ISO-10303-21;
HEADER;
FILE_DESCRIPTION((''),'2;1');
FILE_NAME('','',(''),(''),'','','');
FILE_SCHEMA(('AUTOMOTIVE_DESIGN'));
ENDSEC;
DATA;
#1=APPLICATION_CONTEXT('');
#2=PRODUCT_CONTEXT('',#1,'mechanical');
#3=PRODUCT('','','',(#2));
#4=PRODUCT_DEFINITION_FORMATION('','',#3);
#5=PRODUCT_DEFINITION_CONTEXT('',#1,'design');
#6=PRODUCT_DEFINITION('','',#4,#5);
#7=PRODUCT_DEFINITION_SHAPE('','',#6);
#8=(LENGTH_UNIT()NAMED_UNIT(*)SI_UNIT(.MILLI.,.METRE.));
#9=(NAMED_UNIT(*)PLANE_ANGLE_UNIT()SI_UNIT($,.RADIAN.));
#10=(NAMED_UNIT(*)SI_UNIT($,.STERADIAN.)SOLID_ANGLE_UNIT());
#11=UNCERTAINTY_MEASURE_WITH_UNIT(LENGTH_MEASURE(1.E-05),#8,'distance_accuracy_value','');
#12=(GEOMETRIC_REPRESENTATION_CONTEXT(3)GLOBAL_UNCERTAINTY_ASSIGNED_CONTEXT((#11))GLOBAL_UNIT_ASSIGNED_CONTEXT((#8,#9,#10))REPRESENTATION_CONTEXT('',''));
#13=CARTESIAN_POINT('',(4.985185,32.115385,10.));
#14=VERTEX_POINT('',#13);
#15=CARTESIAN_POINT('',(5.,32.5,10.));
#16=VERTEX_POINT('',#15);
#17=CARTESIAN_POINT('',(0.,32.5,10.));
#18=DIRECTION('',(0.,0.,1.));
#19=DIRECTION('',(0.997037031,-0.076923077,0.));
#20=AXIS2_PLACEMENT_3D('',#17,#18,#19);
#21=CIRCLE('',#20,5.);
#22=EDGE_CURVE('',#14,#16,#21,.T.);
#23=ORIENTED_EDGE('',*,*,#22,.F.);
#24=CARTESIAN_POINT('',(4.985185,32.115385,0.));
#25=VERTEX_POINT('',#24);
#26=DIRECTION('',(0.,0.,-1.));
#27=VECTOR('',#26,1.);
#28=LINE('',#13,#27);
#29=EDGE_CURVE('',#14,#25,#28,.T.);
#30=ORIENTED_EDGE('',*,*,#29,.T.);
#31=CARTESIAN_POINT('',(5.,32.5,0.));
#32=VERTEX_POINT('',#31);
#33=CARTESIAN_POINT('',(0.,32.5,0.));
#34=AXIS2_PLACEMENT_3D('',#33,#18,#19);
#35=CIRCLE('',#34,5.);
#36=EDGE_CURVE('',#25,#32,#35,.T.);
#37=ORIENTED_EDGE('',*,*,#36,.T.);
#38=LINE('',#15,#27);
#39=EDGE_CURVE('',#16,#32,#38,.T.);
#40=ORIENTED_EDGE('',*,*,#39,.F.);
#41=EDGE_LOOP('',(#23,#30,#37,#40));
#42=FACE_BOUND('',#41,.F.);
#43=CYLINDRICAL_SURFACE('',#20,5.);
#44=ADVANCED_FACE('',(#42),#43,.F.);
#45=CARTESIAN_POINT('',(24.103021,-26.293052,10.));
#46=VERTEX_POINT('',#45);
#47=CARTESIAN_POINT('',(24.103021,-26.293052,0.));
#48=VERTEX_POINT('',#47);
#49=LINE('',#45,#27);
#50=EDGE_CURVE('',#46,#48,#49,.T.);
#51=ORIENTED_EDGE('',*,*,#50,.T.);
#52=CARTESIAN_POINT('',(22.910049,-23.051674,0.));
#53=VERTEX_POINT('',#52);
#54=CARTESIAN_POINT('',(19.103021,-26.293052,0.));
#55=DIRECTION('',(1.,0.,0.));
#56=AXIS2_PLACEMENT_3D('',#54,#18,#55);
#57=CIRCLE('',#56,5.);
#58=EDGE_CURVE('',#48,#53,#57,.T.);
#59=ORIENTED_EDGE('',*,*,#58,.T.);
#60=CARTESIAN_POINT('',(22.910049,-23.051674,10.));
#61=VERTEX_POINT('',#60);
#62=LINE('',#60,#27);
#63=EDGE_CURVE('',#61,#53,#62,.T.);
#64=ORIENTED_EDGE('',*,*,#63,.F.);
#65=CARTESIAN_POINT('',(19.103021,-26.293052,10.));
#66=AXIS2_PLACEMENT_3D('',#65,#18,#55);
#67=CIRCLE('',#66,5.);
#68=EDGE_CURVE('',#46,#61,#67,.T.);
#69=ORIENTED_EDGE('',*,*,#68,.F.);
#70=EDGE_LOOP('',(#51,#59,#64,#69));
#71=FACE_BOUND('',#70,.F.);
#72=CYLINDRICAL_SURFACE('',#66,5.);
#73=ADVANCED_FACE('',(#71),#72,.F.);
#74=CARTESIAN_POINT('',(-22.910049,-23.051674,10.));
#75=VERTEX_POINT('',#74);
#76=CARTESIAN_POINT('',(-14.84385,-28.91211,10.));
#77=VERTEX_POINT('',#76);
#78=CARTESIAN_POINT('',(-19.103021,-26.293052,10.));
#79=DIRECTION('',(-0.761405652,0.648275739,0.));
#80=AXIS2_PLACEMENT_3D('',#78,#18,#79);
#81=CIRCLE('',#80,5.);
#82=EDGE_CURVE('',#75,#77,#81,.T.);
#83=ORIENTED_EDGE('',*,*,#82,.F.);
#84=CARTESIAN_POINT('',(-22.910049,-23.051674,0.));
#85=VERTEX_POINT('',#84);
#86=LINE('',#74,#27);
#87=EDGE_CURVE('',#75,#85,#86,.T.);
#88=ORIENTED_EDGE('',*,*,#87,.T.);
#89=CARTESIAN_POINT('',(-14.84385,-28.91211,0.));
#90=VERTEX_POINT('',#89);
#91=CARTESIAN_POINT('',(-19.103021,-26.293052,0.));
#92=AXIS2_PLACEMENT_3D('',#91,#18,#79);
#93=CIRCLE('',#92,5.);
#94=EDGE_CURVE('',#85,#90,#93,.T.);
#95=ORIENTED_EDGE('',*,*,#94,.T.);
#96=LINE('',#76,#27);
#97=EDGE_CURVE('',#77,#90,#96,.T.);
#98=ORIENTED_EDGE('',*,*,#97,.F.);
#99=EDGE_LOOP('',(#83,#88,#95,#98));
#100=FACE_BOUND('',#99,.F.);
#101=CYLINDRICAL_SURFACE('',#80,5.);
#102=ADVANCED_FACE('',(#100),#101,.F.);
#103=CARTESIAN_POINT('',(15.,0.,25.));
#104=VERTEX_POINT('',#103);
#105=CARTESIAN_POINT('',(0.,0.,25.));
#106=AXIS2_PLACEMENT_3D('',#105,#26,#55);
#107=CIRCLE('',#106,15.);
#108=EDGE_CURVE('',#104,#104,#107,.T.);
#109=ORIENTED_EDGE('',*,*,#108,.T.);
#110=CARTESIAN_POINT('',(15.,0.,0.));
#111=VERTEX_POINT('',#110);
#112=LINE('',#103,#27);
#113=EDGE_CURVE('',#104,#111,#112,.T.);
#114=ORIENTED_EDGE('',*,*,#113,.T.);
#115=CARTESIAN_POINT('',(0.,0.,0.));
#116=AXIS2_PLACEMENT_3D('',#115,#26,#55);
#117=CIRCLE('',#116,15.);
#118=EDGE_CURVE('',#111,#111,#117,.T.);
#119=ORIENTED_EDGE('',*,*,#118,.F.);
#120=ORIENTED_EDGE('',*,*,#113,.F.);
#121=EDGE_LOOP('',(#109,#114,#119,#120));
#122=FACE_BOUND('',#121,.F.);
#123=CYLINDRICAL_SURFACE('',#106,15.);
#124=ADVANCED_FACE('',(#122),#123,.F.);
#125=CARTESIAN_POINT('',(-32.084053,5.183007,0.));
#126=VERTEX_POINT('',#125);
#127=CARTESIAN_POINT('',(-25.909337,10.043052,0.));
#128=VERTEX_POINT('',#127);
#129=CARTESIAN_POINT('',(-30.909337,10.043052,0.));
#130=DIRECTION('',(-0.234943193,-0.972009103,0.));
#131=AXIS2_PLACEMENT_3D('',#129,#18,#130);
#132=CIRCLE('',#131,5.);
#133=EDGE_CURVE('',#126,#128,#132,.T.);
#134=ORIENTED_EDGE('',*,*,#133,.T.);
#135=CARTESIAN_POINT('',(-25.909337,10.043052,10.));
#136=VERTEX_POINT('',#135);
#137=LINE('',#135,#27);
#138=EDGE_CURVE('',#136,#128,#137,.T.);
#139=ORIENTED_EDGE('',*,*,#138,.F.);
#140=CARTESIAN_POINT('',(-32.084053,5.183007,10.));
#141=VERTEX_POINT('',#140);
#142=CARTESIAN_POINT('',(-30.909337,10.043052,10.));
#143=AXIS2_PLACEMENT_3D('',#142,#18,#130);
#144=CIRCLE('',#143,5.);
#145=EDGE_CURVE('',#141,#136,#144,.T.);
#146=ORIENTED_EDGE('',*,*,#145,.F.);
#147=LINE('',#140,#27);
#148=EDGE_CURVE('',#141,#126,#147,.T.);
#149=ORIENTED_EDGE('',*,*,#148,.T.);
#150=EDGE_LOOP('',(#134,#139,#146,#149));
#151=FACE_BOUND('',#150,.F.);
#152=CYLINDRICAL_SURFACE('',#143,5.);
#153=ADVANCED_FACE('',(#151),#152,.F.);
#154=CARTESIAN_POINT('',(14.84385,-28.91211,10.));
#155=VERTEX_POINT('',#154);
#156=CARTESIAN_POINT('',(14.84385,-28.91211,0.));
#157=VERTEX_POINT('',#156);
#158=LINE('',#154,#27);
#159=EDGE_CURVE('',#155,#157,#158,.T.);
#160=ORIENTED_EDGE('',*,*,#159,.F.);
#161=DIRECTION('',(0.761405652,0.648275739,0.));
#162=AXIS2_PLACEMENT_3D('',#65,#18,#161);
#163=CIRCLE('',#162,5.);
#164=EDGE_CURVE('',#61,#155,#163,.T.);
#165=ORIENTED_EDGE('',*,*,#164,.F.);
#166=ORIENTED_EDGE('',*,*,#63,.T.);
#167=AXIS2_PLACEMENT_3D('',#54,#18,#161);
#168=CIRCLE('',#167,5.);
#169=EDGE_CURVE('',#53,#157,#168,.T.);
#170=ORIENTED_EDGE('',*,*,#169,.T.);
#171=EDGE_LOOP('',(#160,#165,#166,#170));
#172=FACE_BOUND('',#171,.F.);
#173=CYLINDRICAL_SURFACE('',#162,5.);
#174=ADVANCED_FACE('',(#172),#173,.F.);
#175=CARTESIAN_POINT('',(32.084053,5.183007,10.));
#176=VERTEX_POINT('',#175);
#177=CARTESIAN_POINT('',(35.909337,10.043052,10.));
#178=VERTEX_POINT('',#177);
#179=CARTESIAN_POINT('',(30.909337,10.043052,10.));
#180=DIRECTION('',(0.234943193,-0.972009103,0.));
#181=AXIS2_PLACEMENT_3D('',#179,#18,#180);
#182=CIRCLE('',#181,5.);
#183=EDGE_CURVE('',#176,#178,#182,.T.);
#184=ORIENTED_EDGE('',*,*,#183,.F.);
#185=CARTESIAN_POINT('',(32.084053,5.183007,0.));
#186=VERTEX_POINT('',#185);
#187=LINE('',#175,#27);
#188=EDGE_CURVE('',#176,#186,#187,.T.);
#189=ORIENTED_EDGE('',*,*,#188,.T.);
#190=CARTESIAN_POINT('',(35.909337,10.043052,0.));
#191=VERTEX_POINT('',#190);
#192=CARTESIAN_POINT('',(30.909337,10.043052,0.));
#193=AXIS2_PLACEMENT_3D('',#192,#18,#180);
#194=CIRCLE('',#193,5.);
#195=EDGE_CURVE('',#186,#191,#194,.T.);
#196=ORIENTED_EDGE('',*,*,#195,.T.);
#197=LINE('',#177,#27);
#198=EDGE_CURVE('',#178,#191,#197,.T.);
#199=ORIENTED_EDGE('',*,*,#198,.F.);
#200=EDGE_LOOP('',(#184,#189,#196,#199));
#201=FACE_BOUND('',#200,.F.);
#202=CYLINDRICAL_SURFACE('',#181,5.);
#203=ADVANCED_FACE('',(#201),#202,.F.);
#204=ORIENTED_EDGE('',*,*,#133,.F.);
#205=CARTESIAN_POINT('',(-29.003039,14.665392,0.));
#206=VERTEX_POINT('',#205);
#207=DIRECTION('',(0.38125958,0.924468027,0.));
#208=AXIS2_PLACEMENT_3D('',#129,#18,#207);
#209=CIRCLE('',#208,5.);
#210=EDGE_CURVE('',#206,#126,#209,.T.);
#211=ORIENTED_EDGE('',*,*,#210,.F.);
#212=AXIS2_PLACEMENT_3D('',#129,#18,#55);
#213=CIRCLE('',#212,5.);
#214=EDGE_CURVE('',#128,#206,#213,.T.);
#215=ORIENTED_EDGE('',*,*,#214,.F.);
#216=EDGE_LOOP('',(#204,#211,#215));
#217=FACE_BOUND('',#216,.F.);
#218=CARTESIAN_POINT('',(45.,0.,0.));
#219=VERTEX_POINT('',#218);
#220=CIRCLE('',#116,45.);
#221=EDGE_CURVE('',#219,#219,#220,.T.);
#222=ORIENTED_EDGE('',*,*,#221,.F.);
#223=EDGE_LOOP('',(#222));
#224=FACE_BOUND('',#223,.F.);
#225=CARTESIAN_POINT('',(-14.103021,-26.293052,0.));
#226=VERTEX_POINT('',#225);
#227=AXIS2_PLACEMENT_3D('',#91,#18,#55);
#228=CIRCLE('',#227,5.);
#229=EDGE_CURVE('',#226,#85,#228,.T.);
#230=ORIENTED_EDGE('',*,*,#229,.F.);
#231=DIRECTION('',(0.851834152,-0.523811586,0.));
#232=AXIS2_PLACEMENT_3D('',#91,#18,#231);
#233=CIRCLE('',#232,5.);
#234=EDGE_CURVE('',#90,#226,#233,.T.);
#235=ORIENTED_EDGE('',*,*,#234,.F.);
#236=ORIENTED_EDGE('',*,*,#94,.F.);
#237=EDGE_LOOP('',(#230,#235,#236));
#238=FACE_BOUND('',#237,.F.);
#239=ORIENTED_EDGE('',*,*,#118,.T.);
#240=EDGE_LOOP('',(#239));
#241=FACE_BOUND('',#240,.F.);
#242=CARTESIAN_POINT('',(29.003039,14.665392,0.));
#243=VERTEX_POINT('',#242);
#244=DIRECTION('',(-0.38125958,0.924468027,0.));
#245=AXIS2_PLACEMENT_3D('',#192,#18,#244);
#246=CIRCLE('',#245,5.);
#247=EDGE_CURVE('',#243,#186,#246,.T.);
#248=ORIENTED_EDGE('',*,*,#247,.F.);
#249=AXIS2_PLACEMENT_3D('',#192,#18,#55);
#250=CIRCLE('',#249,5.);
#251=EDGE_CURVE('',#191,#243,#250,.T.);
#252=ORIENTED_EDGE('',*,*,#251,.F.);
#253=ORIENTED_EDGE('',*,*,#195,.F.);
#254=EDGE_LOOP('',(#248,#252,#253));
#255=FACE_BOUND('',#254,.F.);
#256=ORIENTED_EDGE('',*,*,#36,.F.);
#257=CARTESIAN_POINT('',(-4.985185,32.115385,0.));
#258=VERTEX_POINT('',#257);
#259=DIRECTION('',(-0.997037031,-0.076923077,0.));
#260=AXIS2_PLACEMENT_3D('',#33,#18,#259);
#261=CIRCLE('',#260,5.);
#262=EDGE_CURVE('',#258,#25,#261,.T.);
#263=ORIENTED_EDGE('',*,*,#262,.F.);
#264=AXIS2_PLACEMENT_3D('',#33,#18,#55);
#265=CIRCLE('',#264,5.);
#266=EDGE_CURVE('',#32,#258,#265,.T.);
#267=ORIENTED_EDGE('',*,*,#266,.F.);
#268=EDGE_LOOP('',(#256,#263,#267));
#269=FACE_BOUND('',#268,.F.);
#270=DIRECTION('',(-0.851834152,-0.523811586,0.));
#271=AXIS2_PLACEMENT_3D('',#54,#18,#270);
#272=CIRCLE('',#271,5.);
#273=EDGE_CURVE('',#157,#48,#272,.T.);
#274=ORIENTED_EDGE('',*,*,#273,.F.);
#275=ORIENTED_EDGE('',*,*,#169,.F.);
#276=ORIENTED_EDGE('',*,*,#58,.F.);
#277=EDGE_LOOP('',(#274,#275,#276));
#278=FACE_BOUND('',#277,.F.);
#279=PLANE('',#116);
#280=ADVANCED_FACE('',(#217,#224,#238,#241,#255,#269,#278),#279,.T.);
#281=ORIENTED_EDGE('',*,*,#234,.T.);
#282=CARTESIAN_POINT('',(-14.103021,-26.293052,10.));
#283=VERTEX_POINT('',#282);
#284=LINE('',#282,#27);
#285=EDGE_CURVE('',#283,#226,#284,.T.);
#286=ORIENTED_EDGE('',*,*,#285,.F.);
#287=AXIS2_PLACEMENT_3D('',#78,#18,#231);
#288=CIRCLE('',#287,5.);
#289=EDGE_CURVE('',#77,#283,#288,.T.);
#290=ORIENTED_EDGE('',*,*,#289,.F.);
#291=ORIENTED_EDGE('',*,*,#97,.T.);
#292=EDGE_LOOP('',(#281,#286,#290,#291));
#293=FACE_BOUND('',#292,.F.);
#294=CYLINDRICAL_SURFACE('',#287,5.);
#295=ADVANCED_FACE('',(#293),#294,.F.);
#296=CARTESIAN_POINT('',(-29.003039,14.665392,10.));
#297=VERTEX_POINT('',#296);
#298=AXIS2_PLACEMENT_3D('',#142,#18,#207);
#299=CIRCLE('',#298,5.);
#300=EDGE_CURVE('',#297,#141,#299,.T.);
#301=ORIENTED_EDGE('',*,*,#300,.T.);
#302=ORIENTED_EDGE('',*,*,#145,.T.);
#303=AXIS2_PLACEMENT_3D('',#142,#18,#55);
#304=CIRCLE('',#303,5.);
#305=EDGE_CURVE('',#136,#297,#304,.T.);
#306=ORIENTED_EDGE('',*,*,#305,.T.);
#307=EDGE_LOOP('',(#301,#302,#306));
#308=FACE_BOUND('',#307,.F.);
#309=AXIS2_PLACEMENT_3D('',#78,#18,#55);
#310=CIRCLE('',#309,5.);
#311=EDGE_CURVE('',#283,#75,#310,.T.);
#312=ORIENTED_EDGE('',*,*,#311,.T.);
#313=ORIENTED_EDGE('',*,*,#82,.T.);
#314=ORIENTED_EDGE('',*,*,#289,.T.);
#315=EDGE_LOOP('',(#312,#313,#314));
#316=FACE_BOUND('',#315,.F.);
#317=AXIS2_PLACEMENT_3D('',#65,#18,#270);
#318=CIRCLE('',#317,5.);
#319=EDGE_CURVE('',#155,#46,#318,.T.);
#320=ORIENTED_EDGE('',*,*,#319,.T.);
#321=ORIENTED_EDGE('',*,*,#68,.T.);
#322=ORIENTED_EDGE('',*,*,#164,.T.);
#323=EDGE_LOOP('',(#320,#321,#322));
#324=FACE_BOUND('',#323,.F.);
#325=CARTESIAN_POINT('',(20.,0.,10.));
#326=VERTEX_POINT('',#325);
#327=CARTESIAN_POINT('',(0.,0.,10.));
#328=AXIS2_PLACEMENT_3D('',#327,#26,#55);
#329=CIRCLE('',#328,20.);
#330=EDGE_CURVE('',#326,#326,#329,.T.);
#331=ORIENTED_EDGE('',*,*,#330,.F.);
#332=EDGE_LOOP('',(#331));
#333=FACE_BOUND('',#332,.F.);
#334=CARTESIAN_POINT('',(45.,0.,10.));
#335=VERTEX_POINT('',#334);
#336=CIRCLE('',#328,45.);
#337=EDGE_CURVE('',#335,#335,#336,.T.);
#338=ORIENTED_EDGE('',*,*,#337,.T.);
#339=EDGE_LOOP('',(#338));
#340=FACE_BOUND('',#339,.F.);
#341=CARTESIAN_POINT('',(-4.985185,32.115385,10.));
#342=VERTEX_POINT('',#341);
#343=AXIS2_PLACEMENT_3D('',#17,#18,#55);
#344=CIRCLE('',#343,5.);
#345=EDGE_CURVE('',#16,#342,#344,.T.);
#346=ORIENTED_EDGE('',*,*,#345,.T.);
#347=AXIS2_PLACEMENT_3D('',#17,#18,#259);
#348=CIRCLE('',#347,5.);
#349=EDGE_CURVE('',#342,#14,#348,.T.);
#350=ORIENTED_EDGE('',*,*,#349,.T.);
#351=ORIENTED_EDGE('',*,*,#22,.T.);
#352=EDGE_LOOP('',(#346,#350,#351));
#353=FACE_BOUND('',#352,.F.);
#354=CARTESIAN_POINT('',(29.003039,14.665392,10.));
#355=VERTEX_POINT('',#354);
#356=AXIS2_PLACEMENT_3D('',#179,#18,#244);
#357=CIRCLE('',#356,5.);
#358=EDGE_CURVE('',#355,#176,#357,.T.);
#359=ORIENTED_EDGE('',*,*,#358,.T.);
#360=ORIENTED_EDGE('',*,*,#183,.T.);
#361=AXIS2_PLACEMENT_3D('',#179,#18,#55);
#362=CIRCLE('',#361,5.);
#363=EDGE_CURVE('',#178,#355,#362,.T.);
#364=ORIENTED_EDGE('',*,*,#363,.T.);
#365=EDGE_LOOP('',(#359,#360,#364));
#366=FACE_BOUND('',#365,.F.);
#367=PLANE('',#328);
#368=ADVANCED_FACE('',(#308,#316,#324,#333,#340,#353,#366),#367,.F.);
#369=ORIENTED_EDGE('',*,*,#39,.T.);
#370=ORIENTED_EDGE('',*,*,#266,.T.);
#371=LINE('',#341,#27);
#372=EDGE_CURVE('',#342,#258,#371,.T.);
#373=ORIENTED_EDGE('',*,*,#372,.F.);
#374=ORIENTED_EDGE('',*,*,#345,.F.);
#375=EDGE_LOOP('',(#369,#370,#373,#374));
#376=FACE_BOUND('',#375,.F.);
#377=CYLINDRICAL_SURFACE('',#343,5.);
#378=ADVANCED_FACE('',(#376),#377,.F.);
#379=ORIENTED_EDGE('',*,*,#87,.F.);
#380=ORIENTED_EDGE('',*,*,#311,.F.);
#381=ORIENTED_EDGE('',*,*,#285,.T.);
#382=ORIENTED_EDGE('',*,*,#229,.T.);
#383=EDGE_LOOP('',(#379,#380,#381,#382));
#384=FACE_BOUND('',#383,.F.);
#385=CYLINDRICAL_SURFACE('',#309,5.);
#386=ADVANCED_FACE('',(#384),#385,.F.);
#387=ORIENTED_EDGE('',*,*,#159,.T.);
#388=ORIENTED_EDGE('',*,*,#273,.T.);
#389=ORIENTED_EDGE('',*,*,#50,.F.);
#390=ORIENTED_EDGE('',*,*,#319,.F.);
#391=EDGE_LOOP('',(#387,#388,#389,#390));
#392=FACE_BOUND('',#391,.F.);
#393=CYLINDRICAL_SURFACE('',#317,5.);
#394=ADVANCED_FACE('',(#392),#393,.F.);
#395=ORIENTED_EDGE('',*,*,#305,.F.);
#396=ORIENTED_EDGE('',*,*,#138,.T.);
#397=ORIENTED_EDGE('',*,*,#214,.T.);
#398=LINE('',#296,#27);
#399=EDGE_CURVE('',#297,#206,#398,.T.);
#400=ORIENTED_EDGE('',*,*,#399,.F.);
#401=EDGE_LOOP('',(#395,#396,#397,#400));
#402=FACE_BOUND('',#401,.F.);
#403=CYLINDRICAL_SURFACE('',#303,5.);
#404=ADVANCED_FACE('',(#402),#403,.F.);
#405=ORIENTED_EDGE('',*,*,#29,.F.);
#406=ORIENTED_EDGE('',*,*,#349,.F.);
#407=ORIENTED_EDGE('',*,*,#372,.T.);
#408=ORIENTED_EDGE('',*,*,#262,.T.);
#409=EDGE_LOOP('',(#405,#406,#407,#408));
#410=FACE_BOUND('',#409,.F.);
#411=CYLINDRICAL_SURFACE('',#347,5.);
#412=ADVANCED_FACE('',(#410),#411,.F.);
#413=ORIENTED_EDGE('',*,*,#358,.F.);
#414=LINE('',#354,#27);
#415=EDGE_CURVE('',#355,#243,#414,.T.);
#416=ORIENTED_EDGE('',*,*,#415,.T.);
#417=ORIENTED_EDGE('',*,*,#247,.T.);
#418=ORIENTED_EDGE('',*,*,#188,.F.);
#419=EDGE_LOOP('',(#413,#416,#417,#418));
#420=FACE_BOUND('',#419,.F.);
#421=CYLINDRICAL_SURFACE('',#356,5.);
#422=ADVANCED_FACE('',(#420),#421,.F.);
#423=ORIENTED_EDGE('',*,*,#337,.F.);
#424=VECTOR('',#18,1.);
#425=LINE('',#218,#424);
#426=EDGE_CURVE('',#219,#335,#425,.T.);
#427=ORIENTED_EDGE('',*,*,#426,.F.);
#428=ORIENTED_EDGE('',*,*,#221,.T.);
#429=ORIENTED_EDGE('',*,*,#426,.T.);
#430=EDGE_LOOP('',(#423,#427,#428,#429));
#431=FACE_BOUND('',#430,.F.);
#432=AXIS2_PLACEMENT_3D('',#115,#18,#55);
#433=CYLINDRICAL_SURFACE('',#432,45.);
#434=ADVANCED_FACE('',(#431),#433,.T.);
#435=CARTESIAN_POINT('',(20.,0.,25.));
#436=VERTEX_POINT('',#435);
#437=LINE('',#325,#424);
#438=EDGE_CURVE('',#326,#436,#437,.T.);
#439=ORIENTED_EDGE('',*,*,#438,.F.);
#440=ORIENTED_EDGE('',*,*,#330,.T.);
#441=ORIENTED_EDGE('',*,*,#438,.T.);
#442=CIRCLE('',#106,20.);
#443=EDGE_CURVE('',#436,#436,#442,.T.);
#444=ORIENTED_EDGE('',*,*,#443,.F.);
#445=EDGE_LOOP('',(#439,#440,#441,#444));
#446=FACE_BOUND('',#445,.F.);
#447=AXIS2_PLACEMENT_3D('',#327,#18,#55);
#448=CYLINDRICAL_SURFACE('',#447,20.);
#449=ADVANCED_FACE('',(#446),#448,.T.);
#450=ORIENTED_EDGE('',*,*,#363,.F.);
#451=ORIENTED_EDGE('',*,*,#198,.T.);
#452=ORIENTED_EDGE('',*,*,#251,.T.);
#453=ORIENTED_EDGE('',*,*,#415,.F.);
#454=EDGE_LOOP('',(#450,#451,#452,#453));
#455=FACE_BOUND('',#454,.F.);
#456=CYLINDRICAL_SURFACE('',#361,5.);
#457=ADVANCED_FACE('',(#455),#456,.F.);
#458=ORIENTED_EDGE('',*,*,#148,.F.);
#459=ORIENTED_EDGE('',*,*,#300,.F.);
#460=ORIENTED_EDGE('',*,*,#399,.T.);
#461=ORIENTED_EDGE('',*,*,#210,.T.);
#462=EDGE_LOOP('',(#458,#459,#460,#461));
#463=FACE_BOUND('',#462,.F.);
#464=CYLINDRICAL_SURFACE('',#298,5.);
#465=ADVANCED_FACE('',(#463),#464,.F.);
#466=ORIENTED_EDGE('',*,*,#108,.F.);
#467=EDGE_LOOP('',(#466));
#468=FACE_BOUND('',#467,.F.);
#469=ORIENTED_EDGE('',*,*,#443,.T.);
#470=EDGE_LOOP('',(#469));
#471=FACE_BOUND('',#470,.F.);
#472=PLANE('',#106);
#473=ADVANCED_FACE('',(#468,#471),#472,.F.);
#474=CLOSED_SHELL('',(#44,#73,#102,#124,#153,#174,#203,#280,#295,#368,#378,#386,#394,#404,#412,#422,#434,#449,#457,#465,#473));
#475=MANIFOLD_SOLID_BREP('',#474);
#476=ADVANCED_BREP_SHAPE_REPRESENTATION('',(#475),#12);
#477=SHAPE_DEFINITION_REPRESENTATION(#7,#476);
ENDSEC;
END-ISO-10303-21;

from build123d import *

# Parameters (mm, degrees)
F3_DEPTH = 10.001


with BuildPart() as f1:
    # F0 (on Front) → F1 (revolve)
    with BuildSketch(Plane.XZ):
        Polygon((20, 25), (15, 25), (15, 0), (45, 0), (45, 10), (20, 10), align=None)
    revolve(axis=Axis((0, 0, 17.8506122556), (0, 0, -1)))

    # F2 (on face) → F3 (cut, through all)
    with BuildSketch(Plane.XY.offset(10)):
        with BuildLine():
            ThreePointArc((29.0030388795, 14.6653924514), (26.1540541981, 8.4979673453), (32.0840527441, 5.1830068027))
            ThreePointArc((32.0840527441, 5.1830068027), (30.9093367796, 10.0430523172), (29.0030388795, 14.6653924514))
        make_face()
        with BuildLine():
            ThreePointArc((29.0030388795, 14.6653924514), (30.9093367796, 10.0430523172), (32.0840527441, 5.1830068027))
            ThreePointArc((32.0840527441, 5.1830068027), (34.8383048262, 6.9506082855), (35.9093367796, 10.0430523172))
            ThreePointArc((35.9093367796, 10.0430523172), (33.6903896827, 14.1982592615), (29.0030388795, 14.6653924514))
        make_face()
        with BuildLine():
            ThreePointArc((24.1030206995, -26.2930523172), (23.7953091225, -24.5660811664), (22.9100489572, -23.0516736221))
            ThreePointArc((22.9100489572, -23.0516736221), (19.1030206995, -26.2930523172), (14.84384994, -28.9121102474))
            ThreePointArc((14.84384994, -28.9121102474), (20.4639296242, -31.1042815675), (24.1030206995, -26.2930523172))
        make_face()
        with BuildLine():
            ThreePointArc((14.84384994, -28.9121102474), (19.1030206995, -26.2930523172), (22.9100489572, -23.0516736221))
            ThreePointArc((22.9100489572, -23.0516736221), (16.164094438, -22.2479673453), (14.84384994, -28.9121102474))
        make_face()
        with BuildLine():
            ThreePointArc((-4.9851851526, 32.1153846154), (0, 27.5), (4.9851851526, 32.1153846154))
            ThreePointArc((4.9851851526, 32.1153846154), (0, 32.5), (-4.9851851526, 32.1153846154))
        make_face()
        with BuildLine():
            ThreePointArc((-4.9851851526, 32.1153846154), (0, 32.5), (4.9851851526, 32.1153846154))
            ThreePointArc((4.9851851526, 32.1153846154), (4.9962949154, 32.3075496988), (5, 32.5))
            ThreePointArc((5, 32.5), (-0.1924503012, 37.4962949154), (-4.9851851526, 32.1153846154))
        make_face()
        with BuildLine():
            ThreePointArc((-22.9100489572, -23.0516736221), (-22.041946961, -30.3381372891), (-14.84384994, -28.9121102474))
            ThreePointArc((-14.84384994, -28.9121102474), (-19.1030206995, -26.2930523172), (-22.9100489572, -23.0516736221))
        make_face()
        with BuildLine():
            ThreePointArc((-22.9100489572, -23.0516736221), (-19.1030206995, -26.2930523172), (-14.84384994, -28.9121102474))
            ThreePointArc((-14.84384994, -28.9121102474), (-14.2917914492, -27.6539612419), (-14.1030206995, -26.2930523172))
            ThreePointArc((-14.1030206995, -26.2930523172), (-17.3760495487, -21.6007638942), (-22.9100489572, -23.0516736221))
        make_face()
        with BuildLine():
            ThreePointArc((-25.9093367796, 10.0430523172), (-26.7541298353, 12.8241052203), (-29.0030388795, 14.6653924514))
            ThreePointArc((-29.0030388795, 14.6653924514), (-30.9093367796, 10.0430523172), (-32.0840527441, 5.1830068027))
            ThreePointArc((-32.0840527441, 5.1830068027), (-27.8168927479, 6.1140842706), (-25.9093367796, 10.0430523172))
        make_face()
        with BuildLine():
            ThreePointArc((-32.0840527441, 5.1830068027), (-30.9093367796, 10.0430523172), (-29.0030388795, 14.6653924514))
            ThreePointArc((-29.0030388795, 14.6653924514), (-35.6646193611, 11.5881372891), (-32.0840527441, 5.1830068027))
        make_face()
    extrude(amount=-F3_DEPTH, mode=Mode.SUBTRACT)


solid = f1.part
